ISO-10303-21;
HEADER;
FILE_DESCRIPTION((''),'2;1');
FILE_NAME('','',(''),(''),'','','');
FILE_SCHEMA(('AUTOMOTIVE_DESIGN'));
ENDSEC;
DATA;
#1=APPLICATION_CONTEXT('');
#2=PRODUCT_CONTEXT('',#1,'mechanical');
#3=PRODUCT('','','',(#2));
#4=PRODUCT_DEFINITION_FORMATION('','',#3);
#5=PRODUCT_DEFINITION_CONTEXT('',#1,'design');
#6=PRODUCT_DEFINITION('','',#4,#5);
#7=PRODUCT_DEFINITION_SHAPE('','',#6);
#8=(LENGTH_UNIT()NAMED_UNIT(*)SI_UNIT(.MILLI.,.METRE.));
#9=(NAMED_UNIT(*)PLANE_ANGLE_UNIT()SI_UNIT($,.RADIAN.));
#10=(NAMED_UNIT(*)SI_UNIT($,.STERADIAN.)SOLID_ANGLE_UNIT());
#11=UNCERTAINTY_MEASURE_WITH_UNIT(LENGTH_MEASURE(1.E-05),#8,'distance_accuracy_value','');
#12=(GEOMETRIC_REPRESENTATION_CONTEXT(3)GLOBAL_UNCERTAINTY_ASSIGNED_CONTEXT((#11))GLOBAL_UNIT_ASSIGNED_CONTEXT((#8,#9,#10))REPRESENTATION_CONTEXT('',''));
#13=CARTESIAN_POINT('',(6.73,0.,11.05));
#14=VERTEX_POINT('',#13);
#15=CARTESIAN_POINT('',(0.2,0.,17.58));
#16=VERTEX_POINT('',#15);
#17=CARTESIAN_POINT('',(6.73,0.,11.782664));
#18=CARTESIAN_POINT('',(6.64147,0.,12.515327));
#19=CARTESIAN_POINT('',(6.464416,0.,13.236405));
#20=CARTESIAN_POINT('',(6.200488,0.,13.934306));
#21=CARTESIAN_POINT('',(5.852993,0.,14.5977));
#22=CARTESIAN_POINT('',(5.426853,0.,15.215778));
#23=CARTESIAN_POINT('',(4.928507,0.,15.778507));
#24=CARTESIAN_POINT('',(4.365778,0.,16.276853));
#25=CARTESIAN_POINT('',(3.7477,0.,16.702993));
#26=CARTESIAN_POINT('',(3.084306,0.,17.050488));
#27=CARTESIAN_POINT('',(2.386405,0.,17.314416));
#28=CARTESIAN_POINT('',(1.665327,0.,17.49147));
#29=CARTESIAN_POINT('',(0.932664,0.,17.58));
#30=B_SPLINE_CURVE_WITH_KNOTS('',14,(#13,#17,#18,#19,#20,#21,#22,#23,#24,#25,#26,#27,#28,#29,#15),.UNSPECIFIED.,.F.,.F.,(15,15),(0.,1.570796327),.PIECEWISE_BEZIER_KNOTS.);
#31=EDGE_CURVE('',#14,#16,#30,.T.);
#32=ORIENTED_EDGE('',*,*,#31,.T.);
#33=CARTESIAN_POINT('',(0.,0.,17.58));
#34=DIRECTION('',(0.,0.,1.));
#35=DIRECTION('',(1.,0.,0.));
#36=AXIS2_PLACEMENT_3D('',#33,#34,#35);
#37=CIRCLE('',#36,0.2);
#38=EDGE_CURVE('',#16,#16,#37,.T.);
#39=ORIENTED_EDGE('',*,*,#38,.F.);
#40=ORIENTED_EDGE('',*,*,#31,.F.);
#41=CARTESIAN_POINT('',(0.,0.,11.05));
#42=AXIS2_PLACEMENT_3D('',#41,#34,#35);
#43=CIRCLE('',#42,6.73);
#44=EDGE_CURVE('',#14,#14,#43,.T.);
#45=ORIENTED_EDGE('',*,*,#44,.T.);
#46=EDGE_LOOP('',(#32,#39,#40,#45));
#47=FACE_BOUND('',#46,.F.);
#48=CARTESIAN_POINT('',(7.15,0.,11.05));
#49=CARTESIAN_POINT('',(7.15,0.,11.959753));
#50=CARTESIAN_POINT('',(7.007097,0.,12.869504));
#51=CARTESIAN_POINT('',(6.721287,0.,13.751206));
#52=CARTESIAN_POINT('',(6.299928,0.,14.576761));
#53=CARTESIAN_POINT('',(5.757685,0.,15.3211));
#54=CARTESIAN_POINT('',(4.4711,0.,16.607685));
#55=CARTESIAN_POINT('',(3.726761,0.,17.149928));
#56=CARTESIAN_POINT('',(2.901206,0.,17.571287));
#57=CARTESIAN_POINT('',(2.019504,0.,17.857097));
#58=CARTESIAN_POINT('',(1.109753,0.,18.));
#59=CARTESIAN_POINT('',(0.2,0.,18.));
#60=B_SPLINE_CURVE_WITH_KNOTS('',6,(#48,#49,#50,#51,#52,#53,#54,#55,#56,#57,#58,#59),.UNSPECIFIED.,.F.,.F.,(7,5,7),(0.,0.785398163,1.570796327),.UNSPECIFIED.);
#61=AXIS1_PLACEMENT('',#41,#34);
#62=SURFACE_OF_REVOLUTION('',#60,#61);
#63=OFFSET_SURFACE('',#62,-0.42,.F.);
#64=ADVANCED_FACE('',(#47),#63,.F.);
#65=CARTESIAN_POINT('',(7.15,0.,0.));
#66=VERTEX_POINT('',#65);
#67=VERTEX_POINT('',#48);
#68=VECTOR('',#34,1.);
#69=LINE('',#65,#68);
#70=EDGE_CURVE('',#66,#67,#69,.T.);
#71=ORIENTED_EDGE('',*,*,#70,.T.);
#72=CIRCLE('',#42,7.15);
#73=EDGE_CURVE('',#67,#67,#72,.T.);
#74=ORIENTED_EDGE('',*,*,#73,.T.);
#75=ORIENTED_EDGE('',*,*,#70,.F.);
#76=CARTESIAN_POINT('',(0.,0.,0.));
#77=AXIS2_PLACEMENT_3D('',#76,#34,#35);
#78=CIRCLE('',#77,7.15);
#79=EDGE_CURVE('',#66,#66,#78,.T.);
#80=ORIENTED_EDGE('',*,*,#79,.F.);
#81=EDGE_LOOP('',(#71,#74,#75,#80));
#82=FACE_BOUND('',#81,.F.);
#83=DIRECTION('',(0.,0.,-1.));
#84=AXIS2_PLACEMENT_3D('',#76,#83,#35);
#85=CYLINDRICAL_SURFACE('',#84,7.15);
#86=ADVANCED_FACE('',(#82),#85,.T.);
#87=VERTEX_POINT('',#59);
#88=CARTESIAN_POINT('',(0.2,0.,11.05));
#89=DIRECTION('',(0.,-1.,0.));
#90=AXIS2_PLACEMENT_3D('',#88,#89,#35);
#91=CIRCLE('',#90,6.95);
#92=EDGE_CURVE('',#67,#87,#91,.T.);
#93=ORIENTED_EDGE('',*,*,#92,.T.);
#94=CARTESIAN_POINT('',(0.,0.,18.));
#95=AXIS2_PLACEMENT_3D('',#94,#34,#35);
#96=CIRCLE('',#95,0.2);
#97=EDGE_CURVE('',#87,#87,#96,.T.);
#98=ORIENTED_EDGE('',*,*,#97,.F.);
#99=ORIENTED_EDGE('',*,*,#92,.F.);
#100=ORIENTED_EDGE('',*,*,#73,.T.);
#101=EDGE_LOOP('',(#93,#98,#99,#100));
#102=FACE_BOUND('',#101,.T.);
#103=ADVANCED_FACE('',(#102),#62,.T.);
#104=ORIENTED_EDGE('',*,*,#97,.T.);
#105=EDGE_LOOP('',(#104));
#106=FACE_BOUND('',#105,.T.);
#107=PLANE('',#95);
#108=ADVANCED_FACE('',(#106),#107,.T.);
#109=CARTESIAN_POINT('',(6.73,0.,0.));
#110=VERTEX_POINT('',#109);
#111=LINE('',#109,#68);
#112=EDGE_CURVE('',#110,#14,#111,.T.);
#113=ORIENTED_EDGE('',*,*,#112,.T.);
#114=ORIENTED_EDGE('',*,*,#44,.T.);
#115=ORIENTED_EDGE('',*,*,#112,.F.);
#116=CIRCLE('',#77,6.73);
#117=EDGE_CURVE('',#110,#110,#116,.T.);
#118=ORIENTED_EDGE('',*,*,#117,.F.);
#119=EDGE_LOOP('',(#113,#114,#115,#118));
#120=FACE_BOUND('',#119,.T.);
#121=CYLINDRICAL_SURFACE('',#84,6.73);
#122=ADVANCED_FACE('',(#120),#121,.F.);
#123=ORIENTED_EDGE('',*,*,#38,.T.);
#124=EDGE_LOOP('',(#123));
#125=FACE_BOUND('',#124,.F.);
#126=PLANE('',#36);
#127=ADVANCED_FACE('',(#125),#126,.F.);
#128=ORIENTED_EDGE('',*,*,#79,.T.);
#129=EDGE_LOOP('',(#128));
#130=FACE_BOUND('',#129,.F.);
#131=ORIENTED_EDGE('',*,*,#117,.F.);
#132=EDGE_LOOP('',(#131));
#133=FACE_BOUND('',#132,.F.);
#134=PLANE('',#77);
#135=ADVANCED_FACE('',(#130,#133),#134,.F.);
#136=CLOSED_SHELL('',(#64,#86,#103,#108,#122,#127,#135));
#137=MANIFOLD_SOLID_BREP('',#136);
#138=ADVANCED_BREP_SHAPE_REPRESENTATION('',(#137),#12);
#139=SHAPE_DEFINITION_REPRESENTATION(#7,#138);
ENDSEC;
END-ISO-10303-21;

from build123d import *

# Parameters (mm, degrees)
F0_R     = 7.15
F0_R_2   = 6.75
F1_DEPTH = 18
F2_R     = 6.95
F3_T     = -0.42


with BuildPart() as f1:
    # F0 (on Top) → F1 (new body)
    with BuildSketch(Plane.XY):
        Circle(F0_R)
        Circle(F0_R_2, mode=Mode.SUBTRACT)
        Circle(F0_R_2)
    extrude(amount=F1_DEPTH)

    # F2
    f2_edges = [f1.edges().sort_by_distance(p)[0] for p in [
        (-7.15, 0, 18),
    ]]
    fillet(f2_edges, radius=F2_R)

    # F3
    f3_openings = [f1.faces().sort_by_distance(p)[0] for p in [
        (0, 0, 0),
    ]]
    offset(amount=F3_T, openings=f3_openings)


solid = f1.part
